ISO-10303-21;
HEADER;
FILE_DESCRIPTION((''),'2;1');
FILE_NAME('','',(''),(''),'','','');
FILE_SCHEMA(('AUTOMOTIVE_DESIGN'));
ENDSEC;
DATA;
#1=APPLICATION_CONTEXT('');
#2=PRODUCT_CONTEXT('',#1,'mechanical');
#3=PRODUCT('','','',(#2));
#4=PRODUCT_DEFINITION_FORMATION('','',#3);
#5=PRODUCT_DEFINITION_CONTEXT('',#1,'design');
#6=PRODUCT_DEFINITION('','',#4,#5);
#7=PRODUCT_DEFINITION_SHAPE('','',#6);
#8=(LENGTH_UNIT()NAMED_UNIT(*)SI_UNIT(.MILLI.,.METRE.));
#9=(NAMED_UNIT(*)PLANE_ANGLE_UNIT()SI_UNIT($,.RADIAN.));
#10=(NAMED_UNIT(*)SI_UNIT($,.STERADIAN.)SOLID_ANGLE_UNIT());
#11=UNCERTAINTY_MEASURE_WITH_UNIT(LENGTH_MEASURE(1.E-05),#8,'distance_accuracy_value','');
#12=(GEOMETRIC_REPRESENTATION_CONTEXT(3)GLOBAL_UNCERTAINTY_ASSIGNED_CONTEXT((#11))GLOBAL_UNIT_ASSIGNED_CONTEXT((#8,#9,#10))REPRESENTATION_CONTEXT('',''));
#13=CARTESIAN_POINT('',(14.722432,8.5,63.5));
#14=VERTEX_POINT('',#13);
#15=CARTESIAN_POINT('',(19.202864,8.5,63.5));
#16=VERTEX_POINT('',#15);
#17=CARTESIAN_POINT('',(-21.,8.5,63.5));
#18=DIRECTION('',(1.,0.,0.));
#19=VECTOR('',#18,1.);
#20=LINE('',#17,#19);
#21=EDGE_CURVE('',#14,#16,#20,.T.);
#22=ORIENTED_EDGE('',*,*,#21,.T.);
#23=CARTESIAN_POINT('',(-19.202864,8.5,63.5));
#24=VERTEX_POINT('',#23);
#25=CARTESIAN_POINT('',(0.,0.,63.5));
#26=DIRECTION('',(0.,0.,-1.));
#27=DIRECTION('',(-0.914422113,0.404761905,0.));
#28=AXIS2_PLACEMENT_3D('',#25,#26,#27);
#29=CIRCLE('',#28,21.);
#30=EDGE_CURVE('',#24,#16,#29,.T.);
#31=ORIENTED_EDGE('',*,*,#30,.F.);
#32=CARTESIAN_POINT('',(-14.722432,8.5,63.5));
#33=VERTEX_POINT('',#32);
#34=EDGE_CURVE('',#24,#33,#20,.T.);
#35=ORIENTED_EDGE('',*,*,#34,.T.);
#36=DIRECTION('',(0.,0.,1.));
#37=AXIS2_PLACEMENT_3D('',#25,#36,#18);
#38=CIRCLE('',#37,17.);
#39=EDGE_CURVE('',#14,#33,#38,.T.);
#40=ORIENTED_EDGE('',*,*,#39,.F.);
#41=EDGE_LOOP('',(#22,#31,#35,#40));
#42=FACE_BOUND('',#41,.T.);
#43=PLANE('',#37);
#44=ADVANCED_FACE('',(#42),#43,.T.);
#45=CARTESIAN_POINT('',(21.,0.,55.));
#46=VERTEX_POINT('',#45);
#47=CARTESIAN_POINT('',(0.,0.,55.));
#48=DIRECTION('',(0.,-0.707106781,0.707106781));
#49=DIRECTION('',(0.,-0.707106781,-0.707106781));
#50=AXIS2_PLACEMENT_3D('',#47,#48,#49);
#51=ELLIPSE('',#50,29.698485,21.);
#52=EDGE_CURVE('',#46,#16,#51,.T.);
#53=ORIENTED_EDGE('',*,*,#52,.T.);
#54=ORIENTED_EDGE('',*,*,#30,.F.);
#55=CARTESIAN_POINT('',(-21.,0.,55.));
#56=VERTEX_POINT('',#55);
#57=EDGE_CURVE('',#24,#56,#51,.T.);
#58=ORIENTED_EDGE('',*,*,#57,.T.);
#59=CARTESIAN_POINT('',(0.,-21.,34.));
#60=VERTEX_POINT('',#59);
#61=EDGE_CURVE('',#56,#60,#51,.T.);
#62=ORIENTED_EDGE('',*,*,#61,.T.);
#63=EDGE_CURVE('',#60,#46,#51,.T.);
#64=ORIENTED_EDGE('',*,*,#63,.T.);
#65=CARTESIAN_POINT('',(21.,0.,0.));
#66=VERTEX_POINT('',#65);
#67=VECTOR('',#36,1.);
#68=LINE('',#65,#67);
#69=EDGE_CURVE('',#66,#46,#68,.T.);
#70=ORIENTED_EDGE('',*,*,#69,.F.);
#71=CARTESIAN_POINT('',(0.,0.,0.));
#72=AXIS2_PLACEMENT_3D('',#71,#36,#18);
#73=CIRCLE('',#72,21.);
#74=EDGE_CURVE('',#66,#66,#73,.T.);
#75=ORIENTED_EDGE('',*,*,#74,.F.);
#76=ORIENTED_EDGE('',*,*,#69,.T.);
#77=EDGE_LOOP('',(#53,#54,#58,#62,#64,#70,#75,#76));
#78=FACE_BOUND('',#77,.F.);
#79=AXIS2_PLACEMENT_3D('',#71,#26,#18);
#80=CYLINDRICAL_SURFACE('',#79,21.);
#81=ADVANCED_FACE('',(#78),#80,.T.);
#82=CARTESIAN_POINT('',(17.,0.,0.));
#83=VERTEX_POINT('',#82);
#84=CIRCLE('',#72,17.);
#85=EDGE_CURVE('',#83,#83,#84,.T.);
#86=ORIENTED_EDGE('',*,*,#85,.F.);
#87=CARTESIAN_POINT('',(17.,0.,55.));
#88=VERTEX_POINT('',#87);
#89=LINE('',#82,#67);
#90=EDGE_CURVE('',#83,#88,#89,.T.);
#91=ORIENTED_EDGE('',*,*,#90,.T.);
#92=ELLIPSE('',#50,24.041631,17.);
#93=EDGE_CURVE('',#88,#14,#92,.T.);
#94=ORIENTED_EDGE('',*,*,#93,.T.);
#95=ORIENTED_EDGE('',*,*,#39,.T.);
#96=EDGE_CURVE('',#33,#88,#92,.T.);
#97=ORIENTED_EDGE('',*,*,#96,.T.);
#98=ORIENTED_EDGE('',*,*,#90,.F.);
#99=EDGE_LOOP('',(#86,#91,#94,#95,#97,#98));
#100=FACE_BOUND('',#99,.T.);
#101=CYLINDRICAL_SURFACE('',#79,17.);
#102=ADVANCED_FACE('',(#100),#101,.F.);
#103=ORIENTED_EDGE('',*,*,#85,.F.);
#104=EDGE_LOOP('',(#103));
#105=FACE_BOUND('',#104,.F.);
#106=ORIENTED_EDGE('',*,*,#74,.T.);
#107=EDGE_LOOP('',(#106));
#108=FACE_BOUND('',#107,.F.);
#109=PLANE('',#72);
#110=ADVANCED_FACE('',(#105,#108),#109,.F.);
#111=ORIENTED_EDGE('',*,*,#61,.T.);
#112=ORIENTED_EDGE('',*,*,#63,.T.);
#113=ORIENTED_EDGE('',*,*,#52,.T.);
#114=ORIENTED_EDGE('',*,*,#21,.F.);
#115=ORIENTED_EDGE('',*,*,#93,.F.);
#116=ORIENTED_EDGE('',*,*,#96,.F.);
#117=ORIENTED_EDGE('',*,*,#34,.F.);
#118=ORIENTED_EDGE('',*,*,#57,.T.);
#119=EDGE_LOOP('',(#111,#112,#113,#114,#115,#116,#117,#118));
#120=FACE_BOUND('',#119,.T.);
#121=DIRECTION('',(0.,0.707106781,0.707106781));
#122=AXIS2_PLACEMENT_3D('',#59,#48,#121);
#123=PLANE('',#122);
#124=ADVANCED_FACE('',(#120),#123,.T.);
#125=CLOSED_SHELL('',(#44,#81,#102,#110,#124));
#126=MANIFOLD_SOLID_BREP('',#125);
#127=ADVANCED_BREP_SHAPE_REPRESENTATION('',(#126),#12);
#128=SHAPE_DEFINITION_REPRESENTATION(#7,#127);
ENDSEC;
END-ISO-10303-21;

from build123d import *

# Parameters (mm, degrees)
F0_R     = 21
F0_R_2   = 17
F1_DEPTH = 63.5
F3_DEPTH = 21


# Not quite as in the source:
# - a feature names something its author has since deleted; it is built from what else it names


with BuildPart() as f1:
    # F0 (on Top) → F1 (new body)
    with BuildSketch(Plane.XY):
        Circle(F0_R)
        Circle(F0_R_2, mode=Mode.SUBTRACT)
    extrude(amount=F1_DEPTH)

    # F2 (on Right) → F3 (cut, symmetric)
    with BuildSketch(Plane.YZ):
        Polygon((-21, 34), (8.5, 63.5), (21, 63.5), (21, 73.5), (-21, 73.5), align=None)
        Polygon((21, -63.5), (8.5, -63.5), (-21, -34), (-21, -73.5), (21, -73.5), align=None)
    extrude(amount=F3_DEPTH, both=True, mode=Mode.SUBTRACT)


solid = f1.part
